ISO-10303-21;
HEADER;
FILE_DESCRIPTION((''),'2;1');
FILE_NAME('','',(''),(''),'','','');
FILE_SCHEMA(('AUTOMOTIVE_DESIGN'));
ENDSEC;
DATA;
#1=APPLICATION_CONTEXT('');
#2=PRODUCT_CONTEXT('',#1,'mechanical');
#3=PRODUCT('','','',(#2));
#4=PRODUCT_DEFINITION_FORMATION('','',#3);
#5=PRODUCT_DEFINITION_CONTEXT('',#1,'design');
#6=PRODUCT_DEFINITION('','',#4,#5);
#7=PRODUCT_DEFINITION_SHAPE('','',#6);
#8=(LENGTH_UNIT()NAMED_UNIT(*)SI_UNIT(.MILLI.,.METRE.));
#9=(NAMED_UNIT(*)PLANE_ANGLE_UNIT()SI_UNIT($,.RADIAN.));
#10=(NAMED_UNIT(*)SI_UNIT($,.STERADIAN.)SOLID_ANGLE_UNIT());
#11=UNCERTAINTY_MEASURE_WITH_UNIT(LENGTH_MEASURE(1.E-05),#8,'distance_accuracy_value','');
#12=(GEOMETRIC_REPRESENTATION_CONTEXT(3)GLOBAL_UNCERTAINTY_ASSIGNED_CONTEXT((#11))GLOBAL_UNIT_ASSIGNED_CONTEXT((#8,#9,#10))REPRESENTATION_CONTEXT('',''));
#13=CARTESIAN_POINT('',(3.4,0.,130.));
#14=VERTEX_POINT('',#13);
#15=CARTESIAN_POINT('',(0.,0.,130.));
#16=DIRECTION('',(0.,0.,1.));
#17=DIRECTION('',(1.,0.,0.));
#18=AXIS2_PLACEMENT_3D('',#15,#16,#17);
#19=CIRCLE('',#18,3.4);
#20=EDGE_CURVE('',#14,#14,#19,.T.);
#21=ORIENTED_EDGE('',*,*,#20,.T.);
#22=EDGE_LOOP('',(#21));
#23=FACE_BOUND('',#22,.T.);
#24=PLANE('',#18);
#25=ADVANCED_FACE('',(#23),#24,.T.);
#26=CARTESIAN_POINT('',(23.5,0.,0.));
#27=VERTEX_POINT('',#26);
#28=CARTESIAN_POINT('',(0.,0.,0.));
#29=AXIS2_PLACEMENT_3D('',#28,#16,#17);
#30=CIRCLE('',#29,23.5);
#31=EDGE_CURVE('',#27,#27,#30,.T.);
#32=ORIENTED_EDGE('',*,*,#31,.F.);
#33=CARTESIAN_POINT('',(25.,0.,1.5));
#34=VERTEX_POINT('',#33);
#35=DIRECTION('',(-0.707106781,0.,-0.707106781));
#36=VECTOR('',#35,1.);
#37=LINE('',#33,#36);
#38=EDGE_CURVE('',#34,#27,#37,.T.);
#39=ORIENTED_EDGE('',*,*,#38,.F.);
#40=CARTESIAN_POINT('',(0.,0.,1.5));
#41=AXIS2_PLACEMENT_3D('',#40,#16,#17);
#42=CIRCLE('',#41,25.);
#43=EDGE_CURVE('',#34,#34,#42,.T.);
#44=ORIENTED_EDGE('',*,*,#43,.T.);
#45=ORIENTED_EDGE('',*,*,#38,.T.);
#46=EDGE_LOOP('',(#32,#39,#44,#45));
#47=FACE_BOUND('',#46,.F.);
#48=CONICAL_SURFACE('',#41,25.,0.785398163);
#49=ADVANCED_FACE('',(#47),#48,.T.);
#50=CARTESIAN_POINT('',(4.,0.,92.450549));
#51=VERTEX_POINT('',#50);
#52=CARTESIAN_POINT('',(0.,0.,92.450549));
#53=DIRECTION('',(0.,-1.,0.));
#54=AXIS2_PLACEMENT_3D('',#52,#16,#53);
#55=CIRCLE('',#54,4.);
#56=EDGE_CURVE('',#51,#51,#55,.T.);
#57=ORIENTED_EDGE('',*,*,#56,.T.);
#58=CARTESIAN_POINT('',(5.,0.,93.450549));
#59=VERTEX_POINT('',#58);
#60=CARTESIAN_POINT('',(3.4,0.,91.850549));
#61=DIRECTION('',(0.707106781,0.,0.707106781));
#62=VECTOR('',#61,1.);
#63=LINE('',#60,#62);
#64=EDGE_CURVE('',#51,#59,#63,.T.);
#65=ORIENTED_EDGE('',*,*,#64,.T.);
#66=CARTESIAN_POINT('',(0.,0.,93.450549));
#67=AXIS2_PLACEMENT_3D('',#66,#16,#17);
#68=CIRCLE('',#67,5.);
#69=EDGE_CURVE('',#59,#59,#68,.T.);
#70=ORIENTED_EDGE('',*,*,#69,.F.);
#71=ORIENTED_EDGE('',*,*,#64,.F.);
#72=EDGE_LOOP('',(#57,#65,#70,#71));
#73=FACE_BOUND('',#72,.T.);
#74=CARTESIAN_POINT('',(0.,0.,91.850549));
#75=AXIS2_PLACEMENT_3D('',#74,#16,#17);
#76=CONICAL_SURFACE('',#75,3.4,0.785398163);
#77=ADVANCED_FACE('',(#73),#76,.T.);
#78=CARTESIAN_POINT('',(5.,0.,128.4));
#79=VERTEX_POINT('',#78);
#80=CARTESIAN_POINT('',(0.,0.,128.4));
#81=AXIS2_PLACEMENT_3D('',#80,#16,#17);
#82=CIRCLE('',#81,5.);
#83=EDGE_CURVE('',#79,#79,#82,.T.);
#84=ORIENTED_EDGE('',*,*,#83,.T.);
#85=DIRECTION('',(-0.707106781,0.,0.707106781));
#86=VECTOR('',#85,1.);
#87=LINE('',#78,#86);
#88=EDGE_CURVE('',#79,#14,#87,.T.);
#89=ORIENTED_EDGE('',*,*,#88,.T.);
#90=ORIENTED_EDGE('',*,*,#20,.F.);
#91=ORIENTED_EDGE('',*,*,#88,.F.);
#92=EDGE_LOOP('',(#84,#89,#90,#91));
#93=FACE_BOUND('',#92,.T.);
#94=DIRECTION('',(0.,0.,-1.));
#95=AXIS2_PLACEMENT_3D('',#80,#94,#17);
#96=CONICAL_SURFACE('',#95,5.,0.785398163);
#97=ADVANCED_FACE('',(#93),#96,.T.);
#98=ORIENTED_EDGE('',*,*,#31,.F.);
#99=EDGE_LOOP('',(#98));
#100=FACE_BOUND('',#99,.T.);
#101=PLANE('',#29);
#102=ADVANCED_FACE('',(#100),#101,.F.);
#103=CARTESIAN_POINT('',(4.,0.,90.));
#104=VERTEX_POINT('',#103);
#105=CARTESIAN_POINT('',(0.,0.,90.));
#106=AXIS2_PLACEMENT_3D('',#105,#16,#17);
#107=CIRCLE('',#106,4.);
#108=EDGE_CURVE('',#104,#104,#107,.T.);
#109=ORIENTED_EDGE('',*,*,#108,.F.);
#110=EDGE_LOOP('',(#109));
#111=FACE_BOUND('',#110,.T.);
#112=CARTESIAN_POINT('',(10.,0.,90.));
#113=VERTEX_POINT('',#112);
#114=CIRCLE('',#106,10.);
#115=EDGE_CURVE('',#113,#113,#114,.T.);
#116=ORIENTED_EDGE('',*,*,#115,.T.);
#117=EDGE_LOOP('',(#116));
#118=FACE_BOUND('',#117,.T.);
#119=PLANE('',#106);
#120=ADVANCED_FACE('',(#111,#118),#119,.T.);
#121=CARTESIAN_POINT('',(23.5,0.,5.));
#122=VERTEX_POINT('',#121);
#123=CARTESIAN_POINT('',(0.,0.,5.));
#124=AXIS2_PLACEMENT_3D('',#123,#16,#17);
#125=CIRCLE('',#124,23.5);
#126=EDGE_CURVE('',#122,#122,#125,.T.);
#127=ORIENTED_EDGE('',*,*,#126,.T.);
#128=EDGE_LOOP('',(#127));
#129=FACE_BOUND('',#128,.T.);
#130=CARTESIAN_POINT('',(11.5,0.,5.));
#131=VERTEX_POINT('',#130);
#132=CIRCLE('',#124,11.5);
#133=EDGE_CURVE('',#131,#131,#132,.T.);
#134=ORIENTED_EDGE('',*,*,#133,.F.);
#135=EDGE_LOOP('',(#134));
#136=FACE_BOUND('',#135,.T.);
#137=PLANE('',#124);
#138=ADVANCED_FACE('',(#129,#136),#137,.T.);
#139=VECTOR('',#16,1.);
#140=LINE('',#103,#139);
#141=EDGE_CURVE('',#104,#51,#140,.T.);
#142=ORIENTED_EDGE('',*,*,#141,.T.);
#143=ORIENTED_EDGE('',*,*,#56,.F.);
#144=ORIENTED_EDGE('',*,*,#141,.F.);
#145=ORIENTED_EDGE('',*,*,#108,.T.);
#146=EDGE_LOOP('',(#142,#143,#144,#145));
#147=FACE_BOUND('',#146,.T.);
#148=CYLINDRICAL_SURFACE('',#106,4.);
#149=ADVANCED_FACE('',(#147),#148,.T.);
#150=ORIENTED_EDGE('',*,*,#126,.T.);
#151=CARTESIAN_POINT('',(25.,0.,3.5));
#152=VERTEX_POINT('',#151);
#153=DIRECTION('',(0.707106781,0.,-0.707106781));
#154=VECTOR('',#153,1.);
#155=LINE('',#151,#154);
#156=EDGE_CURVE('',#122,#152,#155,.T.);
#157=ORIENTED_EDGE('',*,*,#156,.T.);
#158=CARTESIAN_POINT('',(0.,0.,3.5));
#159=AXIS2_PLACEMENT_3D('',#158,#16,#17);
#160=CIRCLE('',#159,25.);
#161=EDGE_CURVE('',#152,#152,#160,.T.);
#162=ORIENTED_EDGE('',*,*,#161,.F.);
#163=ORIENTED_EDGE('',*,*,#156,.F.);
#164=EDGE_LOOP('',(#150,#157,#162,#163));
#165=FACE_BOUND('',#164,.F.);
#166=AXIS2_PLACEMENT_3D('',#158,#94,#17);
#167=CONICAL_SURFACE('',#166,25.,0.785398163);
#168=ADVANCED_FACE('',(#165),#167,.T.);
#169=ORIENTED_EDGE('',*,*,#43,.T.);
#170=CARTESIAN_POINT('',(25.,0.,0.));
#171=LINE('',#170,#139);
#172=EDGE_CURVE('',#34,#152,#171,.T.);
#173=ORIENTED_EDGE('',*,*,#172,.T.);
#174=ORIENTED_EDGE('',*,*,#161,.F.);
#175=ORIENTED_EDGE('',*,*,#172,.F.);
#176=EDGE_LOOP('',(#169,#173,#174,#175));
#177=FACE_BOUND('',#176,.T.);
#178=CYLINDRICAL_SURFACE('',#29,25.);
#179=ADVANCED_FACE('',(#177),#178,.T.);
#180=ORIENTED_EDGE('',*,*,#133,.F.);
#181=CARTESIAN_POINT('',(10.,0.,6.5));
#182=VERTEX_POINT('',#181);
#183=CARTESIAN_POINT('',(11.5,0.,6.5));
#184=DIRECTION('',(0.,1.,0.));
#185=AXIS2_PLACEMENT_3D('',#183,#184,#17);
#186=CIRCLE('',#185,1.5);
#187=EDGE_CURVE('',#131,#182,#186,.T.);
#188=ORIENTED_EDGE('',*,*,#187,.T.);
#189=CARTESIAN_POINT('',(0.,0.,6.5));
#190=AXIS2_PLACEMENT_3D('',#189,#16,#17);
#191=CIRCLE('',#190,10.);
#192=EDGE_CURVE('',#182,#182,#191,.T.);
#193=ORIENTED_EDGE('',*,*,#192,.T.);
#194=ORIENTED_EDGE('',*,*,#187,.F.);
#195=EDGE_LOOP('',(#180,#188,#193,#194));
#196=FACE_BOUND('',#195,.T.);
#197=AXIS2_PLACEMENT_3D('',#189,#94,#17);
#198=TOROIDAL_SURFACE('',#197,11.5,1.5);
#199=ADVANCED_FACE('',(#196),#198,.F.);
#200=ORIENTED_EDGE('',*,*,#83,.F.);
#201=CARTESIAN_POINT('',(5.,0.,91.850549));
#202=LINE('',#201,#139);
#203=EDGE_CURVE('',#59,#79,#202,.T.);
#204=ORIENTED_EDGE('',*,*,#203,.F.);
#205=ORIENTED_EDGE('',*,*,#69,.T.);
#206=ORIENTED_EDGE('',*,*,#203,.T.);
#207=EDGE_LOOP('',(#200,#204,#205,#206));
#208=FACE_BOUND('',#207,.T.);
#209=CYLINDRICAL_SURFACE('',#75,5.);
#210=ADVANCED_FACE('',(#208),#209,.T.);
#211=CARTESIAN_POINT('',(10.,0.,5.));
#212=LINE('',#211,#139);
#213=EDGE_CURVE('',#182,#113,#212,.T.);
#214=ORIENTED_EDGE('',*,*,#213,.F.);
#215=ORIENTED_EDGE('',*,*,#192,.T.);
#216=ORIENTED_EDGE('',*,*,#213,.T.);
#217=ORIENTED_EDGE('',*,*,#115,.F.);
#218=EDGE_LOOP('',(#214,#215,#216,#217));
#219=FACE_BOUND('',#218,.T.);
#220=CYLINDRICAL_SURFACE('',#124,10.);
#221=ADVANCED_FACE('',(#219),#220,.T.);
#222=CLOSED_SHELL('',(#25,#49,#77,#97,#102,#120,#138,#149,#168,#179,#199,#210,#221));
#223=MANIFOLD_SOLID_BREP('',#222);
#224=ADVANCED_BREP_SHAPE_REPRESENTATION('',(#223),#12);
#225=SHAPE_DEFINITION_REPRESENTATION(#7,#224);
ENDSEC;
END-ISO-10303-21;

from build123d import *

# Parameters (mm, degrees)
F2_R        = 1.5
F3_SIZE     = 1.5
F4_S7_R     = 4
F4_T8_DEPTH = 9


# Not quite as in the source:
# - a fillet or chamfer that OpenCascade refuses, or shapes differently, is made with other operations: its cross-section is extruded or revolved along the edge and cut away or added


with BuildPart() as f1:
    # F0 (on Front) → F1 (revolve)
    with BuildSketch(Plane.XZ):
        Polygon((0, 130), (0, 0), (25, 0), (25, 5), (10, 5), (10, 90), (4, 90), (4, 91.8505489826), (5, 91.8505489826), (5, 130), align=None)
    revolve(axis=Axis((0, 0, 65), (0, 0, 1)))

    # F2
    f2_edges = [f1.edges().sort_by_distance(p)[0] for p in [
        (-10, 0, 5),
    ]]
    fillet(f2_edges, radius=F2_R)

    # F3
    f3_edges = [f1.edges().sort_by_distance(p)[0] for p in [
        (-25, 0, 5),
        (-25, 0, 0),
    ]]
    chamfer(f3_edges, length=F3_SIZE)

    # F4: chamfer of 1.6 on 2 edges, made by hand

    # F4_s1 → F4_t2 (revolve, cut)
    with BuildSketch(Plane.XZ):
        Polygon((5, 128.4), (3.4, 130), (5, 130), align=None)
    revolve(axis=Axis((0, 0, 130), (0, 0, 1)), mode=Mode.SUBTRACT)


with BuildPart() as f4_tool4:
    # F4_s5 → F4_t6 (revolve)
    with BuildSketch(Plane.XZ):
        Polygon((3.4, 91.8505489826), (5, 93.4505489826), (5, 91.8505489826), align=None)
    revolve(axis=Axis((0, 0, 91.8505489826), (0, 0, 1)))

    # F4_s7 → F4_t8 (cut, symmetric)
    with BuildSketch(Plane.XY.offset(92.7)):
        Circle(F4_S7_R)
    extrude(amount=F4_T8_DEPTH, both=True, mode=Mode.SUBTRACT)


with BuildPart() as f1_1:
    add(f1.part)

    # F4_t3: cut F4_tool4
    add(f4_tool4.part, mode=Mode.SUBTRACT)


solid = f1_1.part
